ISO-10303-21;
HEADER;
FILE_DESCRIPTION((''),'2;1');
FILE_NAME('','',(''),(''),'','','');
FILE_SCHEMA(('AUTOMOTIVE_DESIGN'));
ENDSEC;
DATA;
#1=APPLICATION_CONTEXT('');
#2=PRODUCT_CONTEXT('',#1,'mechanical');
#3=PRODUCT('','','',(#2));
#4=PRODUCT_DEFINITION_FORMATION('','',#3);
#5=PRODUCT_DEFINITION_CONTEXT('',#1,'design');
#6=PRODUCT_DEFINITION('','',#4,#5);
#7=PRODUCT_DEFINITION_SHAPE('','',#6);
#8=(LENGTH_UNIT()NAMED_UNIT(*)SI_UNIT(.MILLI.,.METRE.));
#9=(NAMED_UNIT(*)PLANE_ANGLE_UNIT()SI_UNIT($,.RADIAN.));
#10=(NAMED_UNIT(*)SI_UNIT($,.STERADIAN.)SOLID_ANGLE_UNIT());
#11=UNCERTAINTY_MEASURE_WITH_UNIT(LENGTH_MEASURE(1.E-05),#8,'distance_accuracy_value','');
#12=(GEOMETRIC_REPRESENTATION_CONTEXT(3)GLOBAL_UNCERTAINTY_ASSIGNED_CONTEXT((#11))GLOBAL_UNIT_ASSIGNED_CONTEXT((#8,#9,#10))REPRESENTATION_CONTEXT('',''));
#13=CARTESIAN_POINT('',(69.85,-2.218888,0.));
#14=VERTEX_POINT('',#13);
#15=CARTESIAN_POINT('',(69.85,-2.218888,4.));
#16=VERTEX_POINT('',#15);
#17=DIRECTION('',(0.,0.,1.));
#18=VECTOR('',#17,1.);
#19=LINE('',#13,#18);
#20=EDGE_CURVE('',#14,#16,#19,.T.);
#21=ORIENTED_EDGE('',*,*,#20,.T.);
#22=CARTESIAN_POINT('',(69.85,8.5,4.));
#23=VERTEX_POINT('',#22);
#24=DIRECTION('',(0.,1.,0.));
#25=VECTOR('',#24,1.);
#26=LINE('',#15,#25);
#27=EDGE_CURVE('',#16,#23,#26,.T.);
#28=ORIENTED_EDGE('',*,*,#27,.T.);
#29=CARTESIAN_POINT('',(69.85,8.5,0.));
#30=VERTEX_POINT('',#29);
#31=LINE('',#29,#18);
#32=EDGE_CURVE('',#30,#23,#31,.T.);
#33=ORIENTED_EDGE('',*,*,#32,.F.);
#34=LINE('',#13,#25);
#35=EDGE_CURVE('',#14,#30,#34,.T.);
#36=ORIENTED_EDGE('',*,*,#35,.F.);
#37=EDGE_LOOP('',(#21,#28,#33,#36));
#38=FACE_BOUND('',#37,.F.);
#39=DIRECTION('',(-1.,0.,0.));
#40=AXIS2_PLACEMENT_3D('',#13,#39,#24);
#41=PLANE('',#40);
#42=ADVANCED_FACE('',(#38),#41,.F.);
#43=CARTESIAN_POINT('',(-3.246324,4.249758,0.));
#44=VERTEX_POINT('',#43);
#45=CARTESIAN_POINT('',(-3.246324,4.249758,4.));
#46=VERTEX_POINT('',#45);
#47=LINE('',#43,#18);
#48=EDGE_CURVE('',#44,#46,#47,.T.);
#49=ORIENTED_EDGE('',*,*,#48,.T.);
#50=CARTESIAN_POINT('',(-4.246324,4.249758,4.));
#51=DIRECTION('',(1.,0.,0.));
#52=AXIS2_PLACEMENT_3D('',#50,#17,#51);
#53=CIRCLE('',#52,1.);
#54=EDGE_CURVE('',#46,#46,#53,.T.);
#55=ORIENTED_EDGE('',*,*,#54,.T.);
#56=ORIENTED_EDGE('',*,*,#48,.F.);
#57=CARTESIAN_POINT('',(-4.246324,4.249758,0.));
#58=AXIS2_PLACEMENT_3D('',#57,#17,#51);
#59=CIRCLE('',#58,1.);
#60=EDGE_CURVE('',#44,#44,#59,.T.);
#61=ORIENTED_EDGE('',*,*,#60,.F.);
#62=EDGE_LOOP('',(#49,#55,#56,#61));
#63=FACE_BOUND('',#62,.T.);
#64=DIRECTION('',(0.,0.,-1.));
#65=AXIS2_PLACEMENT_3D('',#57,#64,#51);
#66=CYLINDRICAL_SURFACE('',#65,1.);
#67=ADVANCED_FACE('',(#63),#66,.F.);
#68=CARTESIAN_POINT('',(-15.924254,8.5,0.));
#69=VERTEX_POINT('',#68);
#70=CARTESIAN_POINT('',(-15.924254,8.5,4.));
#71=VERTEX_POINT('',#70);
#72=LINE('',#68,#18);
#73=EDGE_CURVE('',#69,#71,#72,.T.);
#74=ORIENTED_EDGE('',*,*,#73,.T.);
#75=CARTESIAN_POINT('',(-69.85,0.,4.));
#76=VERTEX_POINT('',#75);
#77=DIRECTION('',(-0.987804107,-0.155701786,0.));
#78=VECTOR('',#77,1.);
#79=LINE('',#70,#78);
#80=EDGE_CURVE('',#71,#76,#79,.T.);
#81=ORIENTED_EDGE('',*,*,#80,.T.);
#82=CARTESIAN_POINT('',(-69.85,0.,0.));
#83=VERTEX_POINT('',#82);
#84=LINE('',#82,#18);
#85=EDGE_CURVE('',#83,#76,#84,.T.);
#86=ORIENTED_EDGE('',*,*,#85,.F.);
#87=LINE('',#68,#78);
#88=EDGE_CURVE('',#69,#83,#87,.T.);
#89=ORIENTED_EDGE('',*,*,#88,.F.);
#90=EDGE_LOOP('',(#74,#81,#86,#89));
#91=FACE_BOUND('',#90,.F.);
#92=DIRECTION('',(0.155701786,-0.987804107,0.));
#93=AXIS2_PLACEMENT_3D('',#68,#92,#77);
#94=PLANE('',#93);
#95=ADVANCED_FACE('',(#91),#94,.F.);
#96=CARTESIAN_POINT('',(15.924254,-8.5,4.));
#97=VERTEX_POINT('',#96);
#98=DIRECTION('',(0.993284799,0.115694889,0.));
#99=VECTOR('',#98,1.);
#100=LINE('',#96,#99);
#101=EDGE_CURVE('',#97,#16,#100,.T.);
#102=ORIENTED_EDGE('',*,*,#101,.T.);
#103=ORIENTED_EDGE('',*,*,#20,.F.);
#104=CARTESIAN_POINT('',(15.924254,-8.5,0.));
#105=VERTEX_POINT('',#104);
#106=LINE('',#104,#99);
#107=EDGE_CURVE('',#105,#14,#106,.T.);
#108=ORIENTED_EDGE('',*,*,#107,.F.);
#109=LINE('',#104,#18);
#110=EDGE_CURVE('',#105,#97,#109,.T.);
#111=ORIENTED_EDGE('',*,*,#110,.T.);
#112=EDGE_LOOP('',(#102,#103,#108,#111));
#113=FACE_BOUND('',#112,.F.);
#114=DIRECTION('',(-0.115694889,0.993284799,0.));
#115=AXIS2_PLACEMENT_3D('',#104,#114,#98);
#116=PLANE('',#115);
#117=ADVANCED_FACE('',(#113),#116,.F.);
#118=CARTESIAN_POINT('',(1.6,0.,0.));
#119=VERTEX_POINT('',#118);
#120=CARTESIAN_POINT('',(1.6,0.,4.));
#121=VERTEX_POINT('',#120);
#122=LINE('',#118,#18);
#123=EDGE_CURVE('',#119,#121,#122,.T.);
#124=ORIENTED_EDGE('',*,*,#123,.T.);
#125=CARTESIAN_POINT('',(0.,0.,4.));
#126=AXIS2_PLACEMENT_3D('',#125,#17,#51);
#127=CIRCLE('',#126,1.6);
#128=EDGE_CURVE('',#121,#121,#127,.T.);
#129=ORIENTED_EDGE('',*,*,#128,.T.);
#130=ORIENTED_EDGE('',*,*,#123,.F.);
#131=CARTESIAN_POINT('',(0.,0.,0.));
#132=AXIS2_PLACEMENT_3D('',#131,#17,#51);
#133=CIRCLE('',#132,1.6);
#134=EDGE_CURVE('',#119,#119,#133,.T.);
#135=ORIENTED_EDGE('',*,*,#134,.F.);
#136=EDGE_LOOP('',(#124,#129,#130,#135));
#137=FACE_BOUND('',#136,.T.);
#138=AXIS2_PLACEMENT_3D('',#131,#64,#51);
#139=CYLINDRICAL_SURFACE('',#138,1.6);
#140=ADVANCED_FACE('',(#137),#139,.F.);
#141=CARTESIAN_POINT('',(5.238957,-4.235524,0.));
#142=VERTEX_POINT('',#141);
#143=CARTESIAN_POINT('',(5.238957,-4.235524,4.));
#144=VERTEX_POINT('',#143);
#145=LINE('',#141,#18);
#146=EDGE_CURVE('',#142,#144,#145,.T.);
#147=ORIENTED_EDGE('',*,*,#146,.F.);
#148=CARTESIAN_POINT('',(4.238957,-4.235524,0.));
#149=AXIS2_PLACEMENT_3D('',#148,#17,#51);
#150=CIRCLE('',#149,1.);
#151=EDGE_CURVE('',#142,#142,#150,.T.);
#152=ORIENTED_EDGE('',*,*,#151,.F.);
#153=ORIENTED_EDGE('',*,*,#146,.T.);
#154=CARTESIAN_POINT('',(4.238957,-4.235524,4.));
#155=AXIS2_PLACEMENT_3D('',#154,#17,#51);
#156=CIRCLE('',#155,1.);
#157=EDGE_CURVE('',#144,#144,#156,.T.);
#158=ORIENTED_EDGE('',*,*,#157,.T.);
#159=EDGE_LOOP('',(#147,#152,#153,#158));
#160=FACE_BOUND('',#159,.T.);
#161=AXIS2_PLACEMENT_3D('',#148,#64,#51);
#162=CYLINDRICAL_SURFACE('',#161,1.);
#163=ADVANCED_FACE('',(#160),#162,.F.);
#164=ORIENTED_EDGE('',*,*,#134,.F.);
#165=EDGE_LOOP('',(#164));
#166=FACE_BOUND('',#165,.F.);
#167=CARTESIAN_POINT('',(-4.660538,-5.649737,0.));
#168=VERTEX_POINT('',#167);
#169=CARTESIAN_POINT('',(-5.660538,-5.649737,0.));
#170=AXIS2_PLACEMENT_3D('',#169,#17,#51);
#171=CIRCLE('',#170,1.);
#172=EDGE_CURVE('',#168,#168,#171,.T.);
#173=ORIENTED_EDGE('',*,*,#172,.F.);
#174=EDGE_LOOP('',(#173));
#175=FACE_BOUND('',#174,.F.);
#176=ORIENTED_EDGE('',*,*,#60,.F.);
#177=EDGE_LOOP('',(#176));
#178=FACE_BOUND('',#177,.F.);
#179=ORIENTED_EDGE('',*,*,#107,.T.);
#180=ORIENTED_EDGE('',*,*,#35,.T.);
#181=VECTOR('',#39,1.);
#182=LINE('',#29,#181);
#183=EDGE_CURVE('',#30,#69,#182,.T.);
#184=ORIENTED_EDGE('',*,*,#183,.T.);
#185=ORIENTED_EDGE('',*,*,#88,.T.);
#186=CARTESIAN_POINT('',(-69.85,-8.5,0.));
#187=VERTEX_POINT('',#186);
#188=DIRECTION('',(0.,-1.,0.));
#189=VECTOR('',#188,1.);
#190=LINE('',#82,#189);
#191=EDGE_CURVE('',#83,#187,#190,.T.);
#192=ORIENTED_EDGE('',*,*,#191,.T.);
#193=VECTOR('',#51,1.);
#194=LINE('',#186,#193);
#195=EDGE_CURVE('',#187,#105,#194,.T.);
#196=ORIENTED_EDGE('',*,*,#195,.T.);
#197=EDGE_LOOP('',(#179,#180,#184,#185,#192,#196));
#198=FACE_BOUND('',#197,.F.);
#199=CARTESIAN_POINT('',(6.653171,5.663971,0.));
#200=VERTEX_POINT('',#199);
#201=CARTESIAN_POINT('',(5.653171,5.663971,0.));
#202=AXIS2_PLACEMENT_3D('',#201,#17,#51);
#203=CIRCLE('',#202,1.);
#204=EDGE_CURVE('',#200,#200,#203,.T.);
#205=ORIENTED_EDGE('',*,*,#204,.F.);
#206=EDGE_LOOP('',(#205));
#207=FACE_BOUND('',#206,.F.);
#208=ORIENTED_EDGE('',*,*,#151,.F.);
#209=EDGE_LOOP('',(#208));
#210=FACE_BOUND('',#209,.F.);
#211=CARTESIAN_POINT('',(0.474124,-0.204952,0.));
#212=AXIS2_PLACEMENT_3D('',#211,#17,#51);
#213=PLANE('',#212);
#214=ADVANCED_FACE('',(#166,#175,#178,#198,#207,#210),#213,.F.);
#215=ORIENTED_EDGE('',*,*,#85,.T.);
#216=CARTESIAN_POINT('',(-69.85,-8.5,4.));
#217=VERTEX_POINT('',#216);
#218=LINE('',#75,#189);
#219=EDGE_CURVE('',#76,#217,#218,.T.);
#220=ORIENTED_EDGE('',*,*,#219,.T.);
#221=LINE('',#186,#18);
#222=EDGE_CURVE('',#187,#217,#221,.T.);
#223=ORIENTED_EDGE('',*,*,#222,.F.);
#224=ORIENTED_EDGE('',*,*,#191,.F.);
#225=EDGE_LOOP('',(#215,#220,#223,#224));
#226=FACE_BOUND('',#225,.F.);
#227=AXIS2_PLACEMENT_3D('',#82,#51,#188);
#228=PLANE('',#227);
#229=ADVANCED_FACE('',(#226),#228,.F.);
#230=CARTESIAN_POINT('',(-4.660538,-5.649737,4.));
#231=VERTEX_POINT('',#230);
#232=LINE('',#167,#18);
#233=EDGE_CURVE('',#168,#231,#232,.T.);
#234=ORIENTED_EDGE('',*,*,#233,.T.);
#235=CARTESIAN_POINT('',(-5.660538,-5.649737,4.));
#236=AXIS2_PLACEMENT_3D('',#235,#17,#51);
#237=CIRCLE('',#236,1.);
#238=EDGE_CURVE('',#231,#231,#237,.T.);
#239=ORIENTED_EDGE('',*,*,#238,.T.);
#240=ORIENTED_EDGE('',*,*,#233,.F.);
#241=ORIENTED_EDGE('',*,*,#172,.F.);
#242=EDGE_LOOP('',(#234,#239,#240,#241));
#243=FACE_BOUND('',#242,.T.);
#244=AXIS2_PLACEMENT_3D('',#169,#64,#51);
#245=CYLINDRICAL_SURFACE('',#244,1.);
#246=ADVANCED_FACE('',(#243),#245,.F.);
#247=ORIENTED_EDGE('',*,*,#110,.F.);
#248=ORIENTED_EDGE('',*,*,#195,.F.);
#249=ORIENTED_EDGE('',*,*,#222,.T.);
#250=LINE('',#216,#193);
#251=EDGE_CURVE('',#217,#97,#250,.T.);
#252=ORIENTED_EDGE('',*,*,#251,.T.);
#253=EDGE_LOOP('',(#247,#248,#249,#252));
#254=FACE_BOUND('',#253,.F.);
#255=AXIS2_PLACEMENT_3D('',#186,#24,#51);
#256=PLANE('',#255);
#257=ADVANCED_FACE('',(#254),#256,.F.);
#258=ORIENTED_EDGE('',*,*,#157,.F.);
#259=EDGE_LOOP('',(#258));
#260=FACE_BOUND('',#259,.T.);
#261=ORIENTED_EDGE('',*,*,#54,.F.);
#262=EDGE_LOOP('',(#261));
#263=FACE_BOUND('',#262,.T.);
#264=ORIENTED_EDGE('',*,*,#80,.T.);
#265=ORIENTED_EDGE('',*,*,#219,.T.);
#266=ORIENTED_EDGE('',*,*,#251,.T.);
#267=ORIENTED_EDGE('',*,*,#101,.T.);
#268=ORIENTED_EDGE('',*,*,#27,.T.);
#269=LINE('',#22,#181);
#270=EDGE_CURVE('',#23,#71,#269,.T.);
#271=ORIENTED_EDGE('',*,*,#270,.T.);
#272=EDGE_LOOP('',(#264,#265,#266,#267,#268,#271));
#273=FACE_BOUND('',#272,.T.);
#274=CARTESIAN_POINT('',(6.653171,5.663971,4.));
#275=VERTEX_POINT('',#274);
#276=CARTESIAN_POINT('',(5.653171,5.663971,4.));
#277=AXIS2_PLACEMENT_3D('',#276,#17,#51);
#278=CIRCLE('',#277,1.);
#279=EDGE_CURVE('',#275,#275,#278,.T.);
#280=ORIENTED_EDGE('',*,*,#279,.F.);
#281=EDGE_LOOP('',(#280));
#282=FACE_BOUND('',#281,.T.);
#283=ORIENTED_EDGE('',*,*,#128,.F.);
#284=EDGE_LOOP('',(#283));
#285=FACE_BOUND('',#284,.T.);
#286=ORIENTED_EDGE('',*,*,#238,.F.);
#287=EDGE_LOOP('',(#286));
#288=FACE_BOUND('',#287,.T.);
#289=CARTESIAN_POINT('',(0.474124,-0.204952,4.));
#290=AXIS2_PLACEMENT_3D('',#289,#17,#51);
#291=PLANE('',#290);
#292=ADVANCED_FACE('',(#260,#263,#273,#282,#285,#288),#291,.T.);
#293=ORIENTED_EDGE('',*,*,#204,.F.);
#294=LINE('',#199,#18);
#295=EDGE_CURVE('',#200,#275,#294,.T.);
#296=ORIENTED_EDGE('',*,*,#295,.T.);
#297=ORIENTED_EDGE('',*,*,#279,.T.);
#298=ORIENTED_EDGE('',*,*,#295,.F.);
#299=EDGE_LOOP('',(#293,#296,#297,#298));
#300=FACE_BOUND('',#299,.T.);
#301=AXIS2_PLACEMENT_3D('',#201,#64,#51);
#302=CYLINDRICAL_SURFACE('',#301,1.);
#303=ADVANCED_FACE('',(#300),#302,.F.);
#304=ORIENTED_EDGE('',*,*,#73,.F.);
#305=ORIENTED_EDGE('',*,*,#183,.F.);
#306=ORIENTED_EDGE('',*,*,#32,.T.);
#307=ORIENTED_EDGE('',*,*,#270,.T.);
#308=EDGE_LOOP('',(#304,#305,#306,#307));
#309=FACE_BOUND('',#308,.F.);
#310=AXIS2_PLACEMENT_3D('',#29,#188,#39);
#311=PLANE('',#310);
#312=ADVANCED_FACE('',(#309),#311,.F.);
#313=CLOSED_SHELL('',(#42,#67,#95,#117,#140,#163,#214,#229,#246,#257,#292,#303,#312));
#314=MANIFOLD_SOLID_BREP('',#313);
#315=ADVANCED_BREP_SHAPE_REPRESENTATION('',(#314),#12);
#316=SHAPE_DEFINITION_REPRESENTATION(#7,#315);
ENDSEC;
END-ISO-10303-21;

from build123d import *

# Parameters (mm, degrees)
F0_R     = 1
F0_R_2   = 1.6
F1_DEPTH = 4


# Not quite as in the source:
# - a feature names something its author has since deleted; it is built from what else it names


with BuildPart() as f1:
    # F0 (on Top) → F1 (new body)
    with BuildSketch(Plane.XY):
        Polygon((-69.85, 0), (-69.85, -8.5), (15.9242544323, -8.5), (69.85, -2.218887916), (69.85, 8.5), (-15.9242544323, 8.5), align=None)
        with Locations((-5.6605379174, -5.6497372861)):
            Circle(F0_R, mode=Mode.SUBTRACT)
        with Locations((4.2389570192, -4.2355237237)):
            Circle(F0_R, mode=Mode.SUBTRACT)
        with Locations((-4.2463243551, 4.2497576505)):
            Circle(F0_R, mode=Mode.SUBTRACT)
        Circle(F0_R_2, mode=Mode.SUBTRACT)
        with Locations((5.6531705815, 5.6639712129)):
            Circle(F0_R, mode=Mode.SUBTRACT)
    extrude(amount=F1_DEPTH)


solid = f1.part
